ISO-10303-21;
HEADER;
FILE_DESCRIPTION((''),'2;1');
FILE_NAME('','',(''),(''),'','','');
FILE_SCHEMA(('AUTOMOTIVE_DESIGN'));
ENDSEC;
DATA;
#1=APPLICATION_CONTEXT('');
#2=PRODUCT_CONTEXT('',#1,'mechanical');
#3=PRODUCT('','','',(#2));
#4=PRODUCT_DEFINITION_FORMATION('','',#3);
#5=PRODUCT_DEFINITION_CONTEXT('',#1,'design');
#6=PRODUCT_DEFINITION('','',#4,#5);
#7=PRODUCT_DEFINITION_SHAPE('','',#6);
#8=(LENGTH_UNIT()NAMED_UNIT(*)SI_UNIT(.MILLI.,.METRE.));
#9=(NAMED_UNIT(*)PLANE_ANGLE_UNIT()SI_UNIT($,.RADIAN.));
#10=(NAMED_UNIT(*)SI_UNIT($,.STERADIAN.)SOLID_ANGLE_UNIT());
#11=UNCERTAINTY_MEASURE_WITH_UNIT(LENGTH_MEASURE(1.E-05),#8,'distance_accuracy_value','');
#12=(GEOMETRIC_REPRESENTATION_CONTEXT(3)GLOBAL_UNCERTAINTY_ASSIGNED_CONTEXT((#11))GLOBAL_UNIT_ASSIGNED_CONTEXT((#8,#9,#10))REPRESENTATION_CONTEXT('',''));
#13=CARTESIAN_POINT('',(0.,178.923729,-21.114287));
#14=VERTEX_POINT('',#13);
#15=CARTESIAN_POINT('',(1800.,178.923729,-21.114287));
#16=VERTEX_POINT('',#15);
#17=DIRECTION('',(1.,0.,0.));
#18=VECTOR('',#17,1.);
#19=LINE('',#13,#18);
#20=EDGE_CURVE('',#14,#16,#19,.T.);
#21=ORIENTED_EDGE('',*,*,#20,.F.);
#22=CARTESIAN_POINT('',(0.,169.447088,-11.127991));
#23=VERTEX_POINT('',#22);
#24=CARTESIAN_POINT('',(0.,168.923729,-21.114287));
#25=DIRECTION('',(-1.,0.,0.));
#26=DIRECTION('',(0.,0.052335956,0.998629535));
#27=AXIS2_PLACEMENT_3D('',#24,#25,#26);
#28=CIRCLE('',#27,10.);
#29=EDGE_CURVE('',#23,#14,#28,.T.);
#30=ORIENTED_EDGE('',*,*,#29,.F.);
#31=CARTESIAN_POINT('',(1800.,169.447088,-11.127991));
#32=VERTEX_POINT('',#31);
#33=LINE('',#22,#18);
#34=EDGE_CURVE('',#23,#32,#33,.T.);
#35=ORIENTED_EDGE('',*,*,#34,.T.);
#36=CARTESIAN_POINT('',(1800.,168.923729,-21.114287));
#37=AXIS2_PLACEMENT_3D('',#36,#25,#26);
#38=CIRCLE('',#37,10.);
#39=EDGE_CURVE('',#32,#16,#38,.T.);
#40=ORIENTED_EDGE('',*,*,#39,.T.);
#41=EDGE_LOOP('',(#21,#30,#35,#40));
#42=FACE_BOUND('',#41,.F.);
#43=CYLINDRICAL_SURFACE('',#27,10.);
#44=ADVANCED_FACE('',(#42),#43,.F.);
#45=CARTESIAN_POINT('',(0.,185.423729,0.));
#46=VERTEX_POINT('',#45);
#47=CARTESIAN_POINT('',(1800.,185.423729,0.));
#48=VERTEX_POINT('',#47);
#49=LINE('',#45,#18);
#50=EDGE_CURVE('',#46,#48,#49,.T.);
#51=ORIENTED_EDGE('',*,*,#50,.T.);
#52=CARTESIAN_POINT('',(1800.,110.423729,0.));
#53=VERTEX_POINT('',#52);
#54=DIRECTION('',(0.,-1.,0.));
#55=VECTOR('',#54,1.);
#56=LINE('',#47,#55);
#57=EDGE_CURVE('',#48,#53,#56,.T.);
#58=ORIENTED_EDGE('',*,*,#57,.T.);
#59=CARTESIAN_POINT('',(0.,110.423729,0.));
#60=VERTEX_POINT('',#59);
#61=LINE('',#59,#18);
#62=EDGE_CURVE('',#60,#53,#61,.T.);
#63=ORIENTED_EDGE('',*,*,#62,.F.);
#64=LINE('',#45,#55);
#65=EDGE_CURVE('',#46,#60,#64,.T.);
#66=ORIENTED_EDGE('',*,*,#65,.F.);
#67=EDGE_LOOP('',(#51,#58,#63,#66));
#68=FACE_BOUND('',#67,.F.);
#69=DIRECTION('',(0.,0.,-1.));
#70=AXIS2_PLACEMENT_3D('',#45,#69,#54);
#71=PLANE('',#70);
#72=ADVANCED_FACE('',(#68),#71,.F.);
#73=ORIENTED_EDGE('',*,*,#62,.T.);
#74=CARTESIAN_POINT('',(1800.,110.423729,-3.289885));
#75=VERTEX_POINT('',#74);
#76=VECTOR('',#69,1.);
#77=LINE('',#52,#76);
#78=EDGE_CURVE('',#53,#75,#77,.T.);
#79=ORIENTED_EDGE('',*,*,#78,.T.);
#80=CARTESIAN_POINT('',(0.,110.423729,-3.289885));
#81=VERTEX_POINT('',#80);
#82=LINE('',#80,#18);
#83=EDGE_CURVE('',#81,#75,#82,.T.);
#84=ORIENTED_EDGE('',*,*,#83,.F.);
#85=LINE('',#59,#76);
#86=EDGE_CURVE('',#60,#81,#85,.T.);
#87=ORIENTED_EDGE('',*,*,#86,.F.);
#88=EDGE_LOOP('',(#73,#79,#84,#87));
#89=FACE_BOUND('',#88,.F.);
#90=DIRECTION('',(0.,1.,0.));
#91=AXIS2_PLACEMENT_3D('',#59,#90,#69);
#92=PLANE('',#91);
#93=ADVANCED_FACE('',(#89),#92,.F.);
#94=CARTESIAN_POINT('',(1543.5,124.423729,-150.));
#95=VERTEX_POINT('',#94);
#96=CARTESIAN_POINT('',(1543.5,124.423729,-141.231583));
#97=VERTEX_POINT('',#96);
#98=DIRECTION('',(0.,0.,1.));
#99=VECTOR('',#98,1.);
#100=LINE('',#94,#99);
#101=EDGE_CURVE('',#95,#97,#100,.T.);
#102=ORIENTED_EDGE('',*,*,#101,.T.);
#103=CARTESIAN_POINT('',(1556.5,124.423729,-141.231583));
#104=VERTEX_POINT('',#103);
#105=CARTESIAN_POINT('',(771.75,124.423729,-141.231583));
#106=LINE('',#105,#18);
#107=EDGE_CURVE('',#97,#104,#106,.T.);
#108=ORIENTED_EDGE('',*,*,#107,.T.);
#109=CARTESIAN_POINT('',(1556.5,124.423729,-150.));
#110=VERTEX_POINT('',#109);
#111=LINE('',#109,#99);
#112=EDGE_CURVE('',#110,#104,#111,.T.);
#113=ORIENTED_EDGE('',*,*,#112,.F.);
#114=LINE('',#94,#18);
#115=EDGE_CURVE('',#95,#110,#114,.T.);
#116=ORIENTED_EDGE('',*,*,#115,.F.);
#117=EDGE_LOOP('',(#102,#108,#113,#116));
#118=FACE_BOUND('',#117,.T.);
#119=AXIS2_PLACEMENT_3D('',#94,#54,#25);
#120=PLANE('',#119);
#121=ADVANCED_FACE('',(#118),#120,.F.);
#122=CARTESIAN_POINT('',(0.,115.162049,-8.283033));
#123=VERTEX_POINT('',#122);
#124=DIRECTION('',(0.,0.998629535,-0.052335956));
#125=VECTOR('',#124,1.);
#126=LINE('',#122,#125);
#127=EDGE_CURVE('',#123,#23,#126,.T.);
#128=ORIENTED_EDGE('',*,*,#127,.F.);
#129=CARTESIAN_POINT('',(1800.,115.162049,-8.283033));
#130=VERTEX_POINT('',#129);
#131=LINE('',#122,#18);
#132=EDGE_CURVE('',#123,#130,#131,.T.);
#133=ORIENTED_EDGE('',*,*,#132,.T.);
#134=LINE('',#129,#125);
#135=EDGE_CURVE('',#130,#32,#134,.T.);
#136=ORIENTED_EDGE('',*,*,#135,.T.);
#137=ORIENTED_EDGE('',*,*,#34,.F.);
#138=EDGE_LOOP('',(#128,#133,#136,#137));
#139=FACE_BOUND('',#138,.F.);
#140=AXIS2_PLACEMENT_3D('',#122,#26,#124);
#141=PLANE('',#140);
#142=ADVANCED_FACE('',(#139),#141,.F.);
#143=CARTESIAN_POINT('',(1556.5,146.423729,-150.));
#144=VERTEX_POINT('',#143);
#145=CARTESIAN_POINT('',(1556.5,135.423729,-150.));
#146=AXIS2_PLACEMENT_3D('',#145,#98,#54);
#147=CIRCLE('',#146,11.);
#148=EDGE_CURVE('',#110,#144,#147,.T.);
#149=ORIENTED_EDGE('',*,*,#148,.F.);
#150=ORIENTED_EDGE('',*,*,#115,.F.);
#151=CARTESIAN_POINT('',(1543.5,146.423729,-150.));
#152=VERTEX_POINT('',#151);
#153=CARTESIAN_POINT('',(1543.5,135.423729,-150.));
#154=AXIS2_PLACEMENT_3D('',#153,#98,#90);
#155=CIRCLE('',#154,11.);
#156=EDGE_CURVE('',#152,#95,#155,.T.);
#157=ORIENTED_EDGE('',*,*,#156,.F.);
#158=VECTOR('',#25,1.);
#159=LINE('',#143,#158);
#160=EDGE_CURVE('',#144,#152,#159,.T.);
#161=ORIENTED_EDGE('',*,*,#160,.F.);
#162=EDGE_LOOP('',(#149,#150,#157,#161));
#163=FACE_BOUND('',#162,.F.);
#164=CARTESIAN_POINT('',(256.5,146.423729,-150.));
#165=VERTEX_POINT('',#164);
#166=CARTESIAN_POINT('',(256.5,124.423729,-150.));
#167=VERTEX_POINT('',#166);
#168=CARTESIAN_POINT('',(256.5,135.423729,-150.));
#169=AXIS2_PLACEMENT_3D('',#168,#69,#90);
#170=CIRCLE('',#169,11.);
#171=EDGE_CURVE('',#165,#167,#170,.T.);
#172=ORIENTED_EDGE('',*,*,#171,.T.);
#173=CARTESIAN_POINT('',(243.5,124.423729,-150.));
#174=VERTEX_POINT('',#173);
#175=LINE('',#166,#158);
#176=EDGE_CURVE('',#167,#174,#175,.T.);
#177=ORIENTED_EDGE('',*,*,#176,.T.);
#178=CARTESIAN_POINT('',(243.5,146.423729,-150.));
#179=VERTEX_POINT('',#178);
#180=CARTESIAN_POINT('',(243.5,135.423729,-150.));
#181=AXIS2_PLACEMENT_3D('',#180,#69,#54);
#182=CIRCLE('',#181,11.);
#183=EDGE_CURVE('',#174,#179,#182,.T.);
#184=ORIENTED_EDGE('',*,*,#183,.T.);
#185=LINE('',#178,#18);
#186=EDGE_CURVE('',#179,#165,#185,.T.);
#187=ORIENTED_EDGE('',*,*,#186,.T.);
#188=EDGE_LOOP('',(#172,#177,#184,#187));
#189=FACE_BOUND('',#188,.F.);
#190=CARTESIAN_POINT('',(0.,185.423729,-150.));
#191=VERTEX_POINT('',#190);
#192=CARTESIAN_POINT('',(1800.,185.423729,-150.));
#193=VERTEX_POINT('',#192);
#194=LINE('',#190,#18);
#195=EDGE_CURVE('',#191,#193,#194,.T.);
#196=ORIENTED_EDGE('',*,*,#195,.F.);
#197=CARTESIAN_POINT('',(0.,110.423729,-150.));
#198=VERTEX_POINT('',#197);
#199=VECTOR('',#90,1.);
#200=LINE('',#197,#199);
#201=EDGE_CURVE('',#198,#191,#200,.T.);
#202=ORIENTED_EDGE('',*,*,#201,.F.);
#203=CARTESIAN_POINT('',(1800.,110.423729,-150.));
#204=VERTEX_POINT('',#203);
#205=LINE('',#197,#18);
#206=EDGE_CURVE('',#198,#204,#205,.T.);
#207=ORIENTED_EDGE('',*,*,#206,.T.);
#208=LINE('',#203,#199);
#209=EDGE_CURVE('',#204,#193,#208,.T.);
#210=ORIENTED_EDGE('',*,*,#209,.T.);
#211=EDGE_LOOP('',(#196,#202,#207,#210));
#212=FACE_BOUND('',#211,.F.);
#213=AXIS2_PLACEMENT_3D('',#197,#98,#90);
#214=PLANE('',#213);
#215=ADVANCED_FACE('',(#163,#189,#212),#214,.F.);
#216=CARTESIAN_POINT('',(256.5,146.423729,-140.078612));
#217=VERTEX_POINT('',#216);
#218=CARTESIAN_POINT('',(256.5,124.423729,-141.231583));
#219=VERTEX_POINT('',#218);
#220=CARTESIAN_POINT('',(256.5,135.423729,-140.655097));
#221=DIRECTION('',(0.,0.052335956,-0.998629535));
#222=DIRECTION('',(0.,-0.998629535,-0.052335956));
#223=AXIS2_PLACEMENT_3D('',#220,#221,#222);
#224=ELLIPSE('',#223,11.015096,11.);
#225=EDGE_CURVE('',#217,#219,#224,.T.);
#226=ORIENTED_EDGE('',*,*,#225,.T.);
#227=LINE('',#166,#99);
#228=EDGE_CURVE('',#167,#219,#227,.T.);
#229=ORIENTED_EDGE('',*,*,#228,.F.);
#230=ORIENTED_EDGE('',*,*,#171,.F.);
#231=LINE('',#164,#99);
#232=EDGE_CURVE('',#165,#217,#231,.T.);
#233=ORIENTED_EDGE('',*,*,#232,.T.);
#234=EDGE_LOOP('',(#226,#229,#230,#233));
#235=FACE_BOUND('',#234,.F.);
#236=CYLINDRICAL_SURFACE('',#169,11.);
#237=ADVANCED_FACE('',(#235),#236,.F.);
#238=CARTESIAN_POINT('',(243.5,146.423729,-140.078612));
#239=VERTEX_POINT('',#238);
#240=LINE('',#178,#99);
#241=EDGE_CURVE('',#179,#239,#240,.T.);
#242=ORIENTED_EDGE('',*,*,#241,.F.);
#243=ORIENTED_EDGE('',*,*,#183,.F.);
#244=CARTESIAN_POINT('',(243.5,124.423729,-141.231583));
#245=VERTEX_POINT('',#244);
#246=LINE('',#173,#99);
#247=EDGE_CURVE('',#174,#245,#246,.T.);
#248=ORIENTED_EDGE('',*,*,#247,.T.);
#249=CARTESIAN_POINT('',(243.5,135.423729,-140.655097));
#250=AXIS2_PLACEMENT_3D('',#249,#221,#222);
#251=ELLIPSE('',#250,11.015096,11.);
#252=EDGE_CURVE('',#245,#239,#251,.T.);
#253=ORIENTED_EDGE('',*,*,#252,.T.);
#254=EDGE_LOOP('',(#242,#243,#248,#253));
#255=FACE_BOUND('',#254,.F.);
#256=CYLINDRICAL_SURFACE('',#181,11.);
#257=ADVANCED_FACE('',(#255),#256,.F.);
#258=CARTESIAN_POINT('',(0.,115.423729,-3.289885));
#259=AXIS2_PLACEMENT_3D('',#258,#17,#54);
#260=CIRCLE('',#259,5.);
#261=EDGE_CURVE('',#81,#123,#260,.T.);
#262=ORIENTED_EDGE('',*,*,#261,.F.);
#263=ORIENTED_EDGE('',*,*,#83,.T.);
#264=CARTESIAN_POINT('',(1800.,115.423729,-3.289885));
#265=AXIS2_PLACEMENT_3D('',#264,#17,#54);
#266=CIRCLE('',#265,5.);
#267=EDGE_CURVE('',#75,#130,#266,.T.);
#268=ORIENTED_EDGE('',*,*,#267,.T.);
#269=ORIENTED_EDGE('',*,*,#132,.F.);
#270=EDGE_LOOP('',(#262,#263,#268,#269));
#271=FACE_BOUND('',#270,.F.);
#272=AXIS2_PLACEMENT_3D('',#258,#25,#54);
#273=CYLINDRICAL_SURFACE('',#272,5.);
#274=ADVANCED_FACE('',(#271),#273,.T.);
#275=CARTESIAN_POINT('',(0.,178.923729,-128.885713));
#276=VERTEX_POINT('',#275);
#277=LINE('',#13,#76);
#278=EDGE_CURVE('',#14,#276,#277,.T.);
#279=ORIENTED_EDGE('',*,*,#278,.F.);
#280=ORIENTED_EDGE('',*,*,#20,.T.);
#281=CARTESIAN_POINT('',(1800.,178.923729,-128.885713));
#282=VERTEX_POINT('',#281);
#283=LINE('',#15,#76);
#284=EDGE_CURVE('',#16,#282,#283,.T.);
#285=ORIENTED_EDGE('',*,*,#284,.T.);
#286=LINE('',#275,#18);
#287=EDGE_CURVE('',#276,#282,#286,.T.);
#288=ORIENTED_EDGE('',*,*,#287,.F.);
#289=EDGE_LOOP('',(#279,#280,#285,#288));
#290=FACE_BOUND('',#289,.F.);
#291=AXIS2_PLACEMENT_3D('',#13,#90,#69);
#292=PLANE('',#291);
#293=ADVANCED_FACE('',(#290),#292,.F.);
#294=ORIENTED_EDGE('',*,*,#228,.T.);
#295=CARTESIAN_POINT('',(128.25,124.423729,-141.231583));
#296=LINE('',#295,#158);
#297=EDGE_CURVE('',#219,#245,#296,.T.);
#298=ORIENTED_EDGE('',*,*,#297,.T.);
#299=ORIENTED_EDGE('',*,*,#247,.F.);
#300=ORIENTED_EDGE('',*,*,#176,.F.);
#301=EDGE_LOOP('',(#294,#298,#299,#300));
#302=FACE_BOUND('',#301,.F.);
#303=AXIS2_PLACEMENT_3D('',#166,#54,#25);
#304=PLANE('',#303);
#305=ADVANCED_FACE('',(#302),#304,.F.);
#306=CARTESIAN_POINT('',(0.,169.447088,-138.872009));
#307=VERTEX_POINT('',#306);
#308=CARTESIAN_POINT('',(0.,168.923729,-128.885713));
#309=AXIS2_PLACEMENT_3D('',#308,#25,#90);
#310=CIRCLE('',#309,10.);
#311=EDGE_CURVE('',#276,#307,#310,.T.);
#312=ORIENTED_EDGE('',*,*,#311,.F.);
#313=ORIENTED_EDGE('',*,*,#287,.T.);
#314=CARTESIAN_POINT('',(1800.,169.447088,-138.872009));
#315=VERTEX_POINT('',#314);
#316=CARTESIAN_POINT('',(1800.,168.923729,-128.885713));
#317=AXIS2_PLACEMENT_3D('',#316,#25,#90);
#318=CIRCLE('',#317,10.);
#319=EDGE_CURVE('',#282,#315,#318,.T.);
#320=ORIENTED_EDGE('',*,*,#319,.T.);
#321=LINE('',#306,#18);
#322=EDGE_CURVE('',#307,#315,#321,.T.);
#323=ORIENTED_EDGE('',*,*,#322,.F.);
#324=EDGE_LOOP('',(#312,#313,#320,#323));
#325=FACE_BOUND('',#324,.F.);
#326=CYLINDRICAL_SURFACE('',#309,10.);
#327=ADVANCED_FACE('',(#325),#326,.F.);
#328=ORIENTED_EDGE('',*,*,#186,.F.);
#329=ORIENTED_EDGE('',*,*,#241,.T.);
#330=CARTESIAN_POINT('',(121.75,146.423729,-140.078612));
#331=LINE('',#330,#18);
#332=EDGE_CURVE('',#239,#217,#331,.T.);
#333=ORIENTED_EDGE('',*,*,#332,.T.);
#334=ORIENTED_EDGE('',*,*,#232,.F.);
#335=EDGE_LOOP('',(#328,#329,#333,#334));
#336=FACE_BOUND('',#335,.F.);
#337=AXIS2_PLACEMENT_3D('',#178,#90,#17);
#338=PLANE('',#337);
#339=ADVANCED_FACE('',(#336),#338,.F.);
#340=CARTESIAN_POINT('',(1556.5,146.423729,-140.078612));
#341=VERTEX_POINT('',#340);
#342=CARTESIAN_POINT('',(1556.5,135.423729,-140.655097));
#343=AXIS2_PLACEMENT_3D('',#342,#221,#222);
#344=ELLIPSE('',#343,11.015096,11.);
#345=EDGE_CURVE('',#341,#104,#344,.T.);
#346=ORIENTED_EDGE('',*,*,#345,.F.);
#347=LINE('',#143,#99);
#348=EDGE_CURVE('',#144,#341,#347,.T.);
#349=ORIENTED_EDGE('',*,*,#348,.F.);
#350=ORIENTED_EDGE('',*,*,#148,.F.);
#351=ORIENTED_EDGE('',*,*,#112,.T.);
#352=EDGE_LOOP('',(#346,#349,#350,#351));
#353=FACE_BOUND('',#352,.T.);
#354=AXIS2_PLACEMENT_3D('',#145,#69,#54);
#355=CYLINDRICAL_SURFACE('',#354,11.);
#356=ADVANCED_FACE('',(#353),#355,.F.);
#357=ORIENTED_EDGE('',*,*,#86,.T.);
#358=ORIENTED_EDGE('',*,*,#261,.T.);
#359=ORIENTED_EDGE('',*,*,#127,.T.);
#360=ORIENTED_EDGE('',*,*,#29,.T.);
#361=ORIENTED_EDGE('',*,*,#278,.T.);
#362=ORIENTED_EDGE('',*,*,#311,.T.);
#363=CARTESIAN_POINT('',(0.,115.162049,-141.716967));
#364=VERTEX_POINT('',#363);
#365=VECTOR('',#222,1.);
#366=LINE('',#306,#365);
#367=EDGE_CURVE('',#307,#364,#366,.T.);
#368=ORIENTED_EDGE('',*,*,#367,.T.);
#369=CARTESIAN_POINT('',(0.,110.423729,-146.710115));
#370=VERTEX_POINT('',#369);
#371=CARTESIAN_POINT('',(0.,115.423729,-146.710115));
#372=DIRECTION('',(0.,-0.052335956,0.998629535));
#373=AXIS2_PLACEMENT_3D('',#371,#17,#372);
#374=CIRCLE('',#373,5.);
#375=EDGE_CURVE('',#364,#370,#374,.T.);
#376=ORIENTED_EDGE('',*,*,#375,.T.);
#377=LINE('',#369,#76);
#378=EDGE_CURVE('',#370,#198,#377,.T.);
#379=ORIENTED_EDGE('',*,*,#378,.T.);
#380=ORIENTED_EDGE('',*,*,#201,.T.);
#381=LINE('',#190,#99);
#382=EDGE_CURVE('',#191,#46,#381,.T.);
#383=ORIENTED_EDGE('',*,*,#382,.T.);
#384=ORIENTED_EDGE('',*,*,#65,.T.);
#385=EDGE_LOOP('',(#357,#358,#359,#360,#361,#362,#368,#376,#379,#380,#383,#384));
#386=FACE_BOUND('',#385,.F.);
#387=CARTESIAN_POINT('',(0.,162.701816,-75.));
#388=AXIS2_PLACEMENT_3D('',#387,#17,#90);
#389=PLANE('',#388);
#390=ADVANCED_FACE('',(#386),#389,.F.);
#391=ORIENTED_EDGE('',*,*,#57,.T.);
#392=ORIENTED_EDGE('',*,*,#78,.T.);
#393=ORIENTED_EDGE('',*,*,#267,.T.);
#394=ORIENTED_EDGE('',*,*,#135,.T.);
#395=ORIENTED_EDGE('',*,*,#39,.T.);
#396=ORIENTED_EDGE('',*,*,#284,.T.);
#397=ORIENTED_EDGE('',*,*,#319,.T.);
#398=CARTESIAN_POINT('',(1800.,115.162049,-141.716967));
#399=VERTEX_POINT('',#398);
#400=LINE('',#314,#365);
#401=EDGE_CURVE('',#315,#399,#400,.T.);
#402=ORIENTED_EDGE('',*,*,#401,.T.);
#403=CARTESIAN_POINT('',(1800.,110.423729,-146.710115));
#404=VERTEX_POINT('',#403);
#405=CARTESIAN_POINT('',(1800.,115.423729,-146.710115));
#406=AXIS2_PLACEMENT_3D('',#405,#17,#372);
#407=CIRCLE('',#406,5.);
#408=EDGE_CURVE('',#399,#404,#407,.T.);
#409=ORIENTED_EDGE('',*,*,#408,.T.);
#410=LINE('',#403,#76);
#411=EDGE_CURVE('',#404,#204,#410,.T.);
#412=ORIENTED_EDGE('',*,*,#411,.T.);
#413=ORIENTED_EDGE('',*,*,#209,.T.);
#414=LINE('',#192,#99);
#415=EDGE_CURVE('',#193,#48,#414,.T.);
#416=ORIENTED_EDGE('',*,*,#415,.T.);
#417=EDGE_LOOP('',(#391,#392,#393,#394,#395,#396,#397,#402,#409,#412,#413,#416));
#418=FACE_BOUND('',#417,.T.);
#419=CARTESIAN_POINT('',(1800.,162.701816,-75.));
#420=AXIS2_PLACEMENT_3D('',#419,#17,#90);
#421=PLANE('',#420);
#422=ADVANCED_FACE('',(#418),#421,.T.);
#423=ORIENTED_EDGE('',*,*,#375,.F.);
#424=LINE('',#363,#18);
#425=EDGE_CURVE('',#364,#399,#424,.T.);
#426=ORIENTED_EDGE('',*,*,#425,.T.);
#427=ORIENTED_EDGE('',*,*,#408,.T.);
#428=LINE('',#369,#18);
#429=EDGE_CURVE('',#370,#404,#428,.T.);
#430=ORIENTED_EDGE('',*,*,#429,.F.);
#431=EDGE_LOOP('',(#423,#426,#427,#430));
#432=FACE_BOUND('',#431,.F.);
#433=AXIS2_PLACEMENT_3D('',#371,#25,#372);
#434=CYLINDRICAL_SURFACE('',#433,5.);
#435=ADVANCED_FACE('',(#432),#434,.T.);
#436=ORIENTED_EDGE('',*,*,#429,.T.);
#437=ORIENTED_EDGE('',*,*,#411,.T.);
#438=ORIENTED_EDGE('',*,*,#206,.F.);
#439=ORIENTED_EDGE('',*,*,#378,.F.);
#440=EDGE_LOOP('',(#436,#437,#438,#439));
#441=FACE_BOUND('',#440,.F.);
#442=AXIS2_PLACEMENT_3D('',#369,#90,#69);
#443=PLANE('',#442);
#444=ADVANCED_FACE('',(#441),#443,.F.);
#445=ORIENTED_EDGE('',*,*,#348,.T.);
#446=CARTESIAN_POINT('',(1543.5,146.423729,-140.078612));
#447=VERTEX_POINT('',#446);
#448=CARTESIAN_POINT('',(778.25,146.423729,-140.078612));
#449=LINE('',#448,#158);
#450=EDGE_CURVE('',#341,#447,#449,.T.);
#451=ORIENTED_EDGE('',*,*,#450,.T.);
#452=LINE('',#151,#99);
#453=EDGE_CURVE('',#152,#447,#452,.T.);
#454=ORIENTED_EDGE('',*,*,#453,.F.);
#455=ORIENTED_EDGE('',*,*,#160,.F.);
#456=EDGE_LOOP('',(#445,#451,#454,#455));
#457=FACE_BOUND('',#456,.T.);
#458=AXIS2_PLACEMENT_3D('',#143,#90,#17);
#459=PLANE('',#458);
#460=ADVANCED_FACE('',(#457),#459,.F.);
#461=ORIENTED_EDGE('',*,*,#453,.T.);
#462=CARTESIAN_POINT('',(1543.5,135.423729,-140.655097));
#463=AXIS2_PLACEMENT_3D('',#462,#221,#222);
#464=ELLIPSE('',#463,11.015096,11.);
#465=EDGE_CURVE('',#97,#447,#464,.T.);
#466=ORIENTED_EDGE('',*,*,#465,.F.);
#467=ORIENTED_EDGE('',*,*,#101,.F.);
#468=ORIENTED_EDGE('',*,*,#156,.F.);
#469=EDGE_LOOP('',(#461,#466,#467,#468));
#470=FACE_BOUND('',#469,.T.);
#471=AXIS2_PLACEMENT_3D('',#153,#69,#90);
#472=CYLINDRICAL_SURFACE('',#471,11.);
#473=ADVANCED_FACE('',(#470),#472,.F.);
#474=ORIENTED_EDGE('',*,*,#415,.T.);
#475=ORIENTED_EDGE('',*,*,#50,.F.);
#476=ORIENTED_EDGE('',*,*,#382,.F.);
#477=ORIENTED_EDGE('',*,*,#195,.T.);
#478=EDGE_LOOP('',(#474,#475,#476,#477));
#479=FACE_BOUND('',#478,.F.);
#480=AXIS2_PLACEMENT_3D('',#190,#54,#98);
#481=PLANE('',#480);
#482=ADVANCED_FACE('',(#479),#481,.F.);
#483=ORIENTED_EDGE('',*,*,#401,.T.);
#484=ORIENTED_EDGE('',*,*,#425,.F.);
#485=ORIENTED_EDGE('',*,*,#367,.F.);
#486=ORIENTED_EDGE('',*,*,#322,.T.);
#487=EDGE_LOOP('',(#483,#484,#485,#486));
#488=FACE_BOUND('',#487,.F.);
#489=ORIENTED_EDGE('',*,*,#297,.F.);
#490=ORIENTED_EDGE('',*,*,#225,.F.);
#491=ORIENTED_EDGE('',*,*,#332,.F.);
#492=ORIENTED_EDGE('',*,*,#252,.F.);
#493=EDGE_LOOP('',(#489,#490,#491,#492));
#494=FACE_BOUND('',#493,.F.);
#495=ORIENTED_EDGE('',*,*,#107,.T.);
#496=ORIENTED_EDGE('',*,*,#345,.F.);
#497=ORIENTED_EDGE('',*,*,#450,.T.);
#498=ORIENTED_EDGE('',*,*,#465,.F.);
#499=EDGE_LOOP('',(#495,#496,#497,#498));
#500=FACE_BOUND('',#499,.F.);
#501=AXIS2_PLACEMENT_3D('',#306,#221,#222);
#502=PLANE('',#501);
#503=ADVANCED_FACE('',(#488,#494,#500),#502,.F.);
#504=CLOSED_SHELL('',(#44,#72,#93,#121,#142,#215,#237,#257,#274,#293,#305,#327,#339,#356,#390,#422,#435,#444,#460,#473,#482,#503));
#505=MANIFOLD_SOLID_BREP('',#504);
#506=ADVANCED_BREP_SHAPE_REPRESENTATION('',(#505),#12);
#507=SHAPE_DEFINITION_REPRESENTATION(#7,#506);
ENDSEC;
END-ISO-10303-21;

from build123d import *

# Parameters (mm, degrees)
F1_DEPTH = 1800
F3_DEPTH = 9.9223883311


# Not quite as in the source:
# - a pattern or mirror of a feature is missing from the dataset's text; its kind, count and spacing are read off the source's solid


with BuildPart() as f1:
    # F0 (on Right) → F1 (new body)
    with BuildSketch(Plane.YZ):
        with BuildLine():
            Line((185.4237287785, 0), (110.4237287785, 0))
            Line((110.4237287785, 0), (110.4237287785, -3.2898854433))
            ThreePointArc((110.4237287785, -3.2898854433), (111.7968569235, -6.7316583218), (115.1620489973, -8.2830331171))
            Line((115.1620489973, -8.2830331171), (169.447088341, -11.1279914774))
            ThreePointArc((169.447088341, -11.1279914774), (176.1774724886, -14.230741068), (178.9237287785, -21.1142868249))
            Line((178.9237287785, -21.1142868249), (178.9237287785, -128.8857131751))
            ThreePointArc((178.9237287785, -128.8857131751), (176.1774724886, -135.769258932), (169.447088341, -138.8720085226))
            Line((169.447088341, -138.8720085226), (115.1620489973, -141.7169668829))
            ThreePointArc((115.1620489973, -141.7169668829), (111.7968569235, -143.2683416782), (110.4237287785, -146.7101145567))
            Line((110.4237287785, -146.7101145567), (110.4237287785, -150))
            Line((110.4237287785, -150), (185.4237287785, -150))
            Line((185.4237287785, -150), (185.4237287785, 0))
        make_face()
    extrude(amount=F1_DEPTH)

    # F2 (on face) → F3 (cut, through all)
    with BuildSketch(Plane(origin=(0, 0, -150), x_dir=(1, 0, 0), z_dir=(0, 0, -1))):
        with BuildLine():
            ThreePointArc((243.5, -124.4237287785), (232.5, -135.4237287785), (243.5, -146.4237287785))
            Line((243.5, -146.4237287785), (256.5, -146.4237287785))
            ThreePointArc((256.5, -146.4237287785), (267.5, -135.4237287785), (256.5, -124.4237287785))
            Line((256.5, -124.4237287785), (243.5, -124.4237287785))
        make_face()
    f3 = extrude(amount=-F3_DEPTH, mode=Mode.SUBTRACT)

    # F3_copies: F3 across plane
    add(f3.mirror(Plane(origin=(900, 0, 0), x_dir=(0, 0, 1), z_dir=(1, 0, 0))), mode=Mode.SUBTRACT)


solid = f1.part
